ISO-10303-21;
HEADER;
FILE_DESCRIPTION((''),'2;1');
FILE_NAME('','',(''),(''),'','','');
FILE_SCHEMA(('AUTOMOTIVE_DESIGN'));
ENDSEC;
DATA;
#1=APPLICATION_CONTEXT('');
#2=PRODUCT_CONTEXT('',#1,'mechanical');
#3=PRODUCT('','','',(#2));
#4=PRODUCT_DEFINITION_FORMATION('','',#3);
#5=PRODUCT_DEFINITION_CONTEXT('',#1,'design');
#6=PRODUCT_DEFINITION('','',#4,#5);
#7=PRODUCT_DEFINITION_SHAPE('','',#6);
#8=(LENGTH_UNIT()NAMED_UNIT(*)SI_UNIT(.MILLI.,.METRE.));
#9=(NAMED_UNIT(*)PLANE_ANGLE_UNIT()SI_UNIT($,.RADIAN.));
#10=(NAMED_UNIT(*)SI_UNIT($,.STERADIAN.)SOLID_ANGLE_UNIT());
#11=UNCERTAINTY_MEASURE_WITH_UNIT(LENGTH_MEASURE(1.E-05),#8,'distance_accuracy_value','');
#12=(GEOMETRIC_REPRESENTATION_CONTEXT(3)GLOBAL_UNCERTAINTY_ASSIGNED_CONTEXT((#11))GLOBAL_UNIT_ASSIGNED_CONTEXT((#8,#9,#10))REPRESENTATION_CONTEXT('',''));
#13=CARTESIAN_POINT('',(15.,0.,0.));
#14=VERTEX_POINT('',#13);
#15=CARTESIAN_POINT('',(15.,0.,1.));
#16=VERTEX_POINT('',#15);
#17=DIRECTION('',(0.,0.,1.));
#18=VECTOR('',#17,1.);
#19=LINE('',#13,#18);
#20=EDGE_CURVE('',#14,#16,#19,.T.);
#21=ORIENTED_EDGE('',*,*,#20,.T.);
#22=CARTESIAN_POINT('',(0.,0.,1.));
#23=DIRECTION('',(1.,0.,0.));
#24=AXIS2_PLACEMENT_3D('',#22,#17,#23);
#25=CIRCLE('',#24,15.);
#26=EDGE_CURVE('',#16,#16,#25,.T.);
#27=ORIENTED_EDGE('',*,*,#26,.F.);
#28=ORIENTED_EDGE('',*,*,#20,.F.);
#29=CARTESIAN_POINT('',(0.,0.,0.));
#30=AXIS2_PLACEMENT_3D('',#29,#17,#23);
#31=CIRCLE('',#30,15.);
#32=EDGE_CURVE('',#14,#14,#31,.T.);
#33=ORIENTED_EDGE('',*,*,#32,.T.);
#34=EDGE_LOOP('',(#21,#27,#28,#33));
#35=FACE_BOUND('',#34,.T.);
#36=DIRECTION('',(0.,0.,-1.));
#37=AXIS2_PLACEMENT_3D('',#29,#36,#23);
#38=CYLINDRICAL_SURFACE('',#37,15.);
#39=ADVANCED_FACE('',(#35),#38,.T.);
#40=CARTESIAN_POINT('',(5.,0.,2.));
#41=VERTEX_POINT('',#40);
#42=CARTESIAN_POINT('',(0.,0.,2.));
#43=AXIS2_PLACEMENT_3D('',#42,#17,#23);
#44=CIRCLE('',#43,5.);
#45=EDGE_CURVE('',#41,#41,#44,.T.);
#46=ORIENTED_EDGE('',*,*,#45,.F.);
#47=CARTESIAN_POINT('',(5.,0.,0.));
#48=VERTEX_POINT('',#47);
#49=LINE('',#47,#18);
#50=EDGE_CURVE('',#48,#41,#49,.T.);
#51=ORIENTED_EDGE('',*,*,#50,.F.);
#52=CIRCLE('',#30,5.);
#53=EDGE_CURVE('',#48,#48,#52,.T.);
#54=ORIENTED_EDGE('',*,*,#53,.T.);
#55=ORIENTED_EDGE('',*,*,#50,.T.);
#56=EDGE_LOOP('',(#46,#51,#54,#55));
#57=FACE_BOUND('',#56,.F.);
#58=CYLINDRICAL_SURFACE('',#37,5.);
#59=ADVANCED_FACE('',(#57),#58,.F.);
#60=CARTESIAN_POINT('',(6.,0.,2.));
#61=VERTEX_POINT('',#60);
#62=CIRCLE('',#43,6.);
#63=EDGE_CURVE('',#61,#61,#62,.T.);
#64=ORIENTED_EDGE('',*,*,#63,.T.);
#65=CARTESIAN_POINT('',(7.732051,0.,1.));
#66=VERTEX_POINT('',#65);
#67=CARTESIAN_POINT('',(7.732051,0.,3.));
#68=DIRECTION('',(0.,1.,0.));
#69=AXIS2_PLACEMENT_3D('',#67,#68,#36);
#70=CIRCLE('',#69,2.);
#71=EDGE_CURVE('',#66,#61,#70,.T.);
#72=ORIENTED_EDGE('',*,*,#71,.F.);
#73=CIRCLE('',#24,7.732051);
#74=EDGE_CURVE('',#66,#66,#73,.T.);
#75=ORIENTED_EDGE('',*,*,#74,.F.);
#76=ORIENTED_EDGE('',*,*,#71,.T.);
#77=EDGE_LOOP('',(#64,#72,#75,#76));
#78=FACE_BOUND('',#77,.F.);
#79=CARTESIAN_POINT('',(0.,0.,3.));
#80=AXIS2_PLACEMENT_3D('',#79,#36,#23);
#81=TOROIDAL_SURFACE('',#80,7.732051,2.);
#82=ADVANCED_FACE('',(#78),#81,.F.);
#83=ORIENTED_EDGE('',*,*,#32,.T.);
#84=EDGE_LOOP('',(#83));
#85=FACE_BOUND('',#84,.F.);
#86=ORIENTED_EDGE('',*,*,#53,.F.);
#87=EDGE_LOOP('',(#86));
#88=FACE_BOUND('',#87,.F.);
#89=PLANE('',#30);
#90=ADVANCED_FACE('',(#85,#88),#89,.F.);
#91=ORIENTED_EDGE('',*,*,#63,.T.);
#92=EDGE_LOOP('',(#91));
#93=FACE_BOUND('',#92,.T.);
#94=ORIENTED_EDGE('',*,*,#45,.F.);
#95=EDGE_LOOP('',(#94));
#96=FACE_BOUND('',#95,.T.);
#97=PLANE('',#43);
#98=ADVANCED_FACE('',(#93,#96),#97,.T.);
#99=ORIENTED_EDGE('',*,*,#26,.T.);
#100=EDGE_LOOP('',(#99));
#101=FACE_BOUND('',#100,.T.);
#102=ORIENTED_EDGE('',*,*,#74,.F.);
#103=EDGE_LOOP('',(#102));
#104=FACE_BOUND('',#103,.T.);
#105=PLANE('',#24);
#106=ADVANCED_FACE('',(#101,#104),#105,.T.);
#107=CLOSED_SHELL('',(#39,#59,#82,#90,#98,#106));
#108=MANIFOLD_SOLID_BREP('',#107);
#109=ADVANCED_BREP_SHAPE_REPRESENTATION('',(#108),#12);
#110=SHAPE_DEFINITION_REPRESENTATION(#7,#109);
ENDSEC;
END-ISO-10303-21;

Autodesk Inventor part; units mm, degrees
ref_plane "YZ Plane" through (0, 0, 0) normal (1, 0, 0) x (0, 1, 0)
ref_plane "XZ Plane" through (0, 0, 0) normal (0, 1, 0) x (-1, 0, 0)
ref_plane "XY Plane" through (0, 0, 0) normal (0, 0, 1) x (1, 0, 0)
sketch "Sketch1" plane through (0, 0, 0) normal (0, 0, 1) x (1, 0, 0)
  circle A0 centre (0, 0) radius 5
  circle A1 centre (0, 0) radius 15
  circle A2 centre (0, 0) radius 6
  dimension "d0" = 10
  dimension "d1" = 30
  dimension "d2" = 1
extrude "Extrusion1" add sketch "Sketch1" along normal blind 1 contours A1
extrude "Extrusion2" add sketch "Sketch1" along normal blind 2 contours A2
fillet "Fillet1" radius 2 1 edges at (-6, 0, 1)
properties part number "Retenedor"
